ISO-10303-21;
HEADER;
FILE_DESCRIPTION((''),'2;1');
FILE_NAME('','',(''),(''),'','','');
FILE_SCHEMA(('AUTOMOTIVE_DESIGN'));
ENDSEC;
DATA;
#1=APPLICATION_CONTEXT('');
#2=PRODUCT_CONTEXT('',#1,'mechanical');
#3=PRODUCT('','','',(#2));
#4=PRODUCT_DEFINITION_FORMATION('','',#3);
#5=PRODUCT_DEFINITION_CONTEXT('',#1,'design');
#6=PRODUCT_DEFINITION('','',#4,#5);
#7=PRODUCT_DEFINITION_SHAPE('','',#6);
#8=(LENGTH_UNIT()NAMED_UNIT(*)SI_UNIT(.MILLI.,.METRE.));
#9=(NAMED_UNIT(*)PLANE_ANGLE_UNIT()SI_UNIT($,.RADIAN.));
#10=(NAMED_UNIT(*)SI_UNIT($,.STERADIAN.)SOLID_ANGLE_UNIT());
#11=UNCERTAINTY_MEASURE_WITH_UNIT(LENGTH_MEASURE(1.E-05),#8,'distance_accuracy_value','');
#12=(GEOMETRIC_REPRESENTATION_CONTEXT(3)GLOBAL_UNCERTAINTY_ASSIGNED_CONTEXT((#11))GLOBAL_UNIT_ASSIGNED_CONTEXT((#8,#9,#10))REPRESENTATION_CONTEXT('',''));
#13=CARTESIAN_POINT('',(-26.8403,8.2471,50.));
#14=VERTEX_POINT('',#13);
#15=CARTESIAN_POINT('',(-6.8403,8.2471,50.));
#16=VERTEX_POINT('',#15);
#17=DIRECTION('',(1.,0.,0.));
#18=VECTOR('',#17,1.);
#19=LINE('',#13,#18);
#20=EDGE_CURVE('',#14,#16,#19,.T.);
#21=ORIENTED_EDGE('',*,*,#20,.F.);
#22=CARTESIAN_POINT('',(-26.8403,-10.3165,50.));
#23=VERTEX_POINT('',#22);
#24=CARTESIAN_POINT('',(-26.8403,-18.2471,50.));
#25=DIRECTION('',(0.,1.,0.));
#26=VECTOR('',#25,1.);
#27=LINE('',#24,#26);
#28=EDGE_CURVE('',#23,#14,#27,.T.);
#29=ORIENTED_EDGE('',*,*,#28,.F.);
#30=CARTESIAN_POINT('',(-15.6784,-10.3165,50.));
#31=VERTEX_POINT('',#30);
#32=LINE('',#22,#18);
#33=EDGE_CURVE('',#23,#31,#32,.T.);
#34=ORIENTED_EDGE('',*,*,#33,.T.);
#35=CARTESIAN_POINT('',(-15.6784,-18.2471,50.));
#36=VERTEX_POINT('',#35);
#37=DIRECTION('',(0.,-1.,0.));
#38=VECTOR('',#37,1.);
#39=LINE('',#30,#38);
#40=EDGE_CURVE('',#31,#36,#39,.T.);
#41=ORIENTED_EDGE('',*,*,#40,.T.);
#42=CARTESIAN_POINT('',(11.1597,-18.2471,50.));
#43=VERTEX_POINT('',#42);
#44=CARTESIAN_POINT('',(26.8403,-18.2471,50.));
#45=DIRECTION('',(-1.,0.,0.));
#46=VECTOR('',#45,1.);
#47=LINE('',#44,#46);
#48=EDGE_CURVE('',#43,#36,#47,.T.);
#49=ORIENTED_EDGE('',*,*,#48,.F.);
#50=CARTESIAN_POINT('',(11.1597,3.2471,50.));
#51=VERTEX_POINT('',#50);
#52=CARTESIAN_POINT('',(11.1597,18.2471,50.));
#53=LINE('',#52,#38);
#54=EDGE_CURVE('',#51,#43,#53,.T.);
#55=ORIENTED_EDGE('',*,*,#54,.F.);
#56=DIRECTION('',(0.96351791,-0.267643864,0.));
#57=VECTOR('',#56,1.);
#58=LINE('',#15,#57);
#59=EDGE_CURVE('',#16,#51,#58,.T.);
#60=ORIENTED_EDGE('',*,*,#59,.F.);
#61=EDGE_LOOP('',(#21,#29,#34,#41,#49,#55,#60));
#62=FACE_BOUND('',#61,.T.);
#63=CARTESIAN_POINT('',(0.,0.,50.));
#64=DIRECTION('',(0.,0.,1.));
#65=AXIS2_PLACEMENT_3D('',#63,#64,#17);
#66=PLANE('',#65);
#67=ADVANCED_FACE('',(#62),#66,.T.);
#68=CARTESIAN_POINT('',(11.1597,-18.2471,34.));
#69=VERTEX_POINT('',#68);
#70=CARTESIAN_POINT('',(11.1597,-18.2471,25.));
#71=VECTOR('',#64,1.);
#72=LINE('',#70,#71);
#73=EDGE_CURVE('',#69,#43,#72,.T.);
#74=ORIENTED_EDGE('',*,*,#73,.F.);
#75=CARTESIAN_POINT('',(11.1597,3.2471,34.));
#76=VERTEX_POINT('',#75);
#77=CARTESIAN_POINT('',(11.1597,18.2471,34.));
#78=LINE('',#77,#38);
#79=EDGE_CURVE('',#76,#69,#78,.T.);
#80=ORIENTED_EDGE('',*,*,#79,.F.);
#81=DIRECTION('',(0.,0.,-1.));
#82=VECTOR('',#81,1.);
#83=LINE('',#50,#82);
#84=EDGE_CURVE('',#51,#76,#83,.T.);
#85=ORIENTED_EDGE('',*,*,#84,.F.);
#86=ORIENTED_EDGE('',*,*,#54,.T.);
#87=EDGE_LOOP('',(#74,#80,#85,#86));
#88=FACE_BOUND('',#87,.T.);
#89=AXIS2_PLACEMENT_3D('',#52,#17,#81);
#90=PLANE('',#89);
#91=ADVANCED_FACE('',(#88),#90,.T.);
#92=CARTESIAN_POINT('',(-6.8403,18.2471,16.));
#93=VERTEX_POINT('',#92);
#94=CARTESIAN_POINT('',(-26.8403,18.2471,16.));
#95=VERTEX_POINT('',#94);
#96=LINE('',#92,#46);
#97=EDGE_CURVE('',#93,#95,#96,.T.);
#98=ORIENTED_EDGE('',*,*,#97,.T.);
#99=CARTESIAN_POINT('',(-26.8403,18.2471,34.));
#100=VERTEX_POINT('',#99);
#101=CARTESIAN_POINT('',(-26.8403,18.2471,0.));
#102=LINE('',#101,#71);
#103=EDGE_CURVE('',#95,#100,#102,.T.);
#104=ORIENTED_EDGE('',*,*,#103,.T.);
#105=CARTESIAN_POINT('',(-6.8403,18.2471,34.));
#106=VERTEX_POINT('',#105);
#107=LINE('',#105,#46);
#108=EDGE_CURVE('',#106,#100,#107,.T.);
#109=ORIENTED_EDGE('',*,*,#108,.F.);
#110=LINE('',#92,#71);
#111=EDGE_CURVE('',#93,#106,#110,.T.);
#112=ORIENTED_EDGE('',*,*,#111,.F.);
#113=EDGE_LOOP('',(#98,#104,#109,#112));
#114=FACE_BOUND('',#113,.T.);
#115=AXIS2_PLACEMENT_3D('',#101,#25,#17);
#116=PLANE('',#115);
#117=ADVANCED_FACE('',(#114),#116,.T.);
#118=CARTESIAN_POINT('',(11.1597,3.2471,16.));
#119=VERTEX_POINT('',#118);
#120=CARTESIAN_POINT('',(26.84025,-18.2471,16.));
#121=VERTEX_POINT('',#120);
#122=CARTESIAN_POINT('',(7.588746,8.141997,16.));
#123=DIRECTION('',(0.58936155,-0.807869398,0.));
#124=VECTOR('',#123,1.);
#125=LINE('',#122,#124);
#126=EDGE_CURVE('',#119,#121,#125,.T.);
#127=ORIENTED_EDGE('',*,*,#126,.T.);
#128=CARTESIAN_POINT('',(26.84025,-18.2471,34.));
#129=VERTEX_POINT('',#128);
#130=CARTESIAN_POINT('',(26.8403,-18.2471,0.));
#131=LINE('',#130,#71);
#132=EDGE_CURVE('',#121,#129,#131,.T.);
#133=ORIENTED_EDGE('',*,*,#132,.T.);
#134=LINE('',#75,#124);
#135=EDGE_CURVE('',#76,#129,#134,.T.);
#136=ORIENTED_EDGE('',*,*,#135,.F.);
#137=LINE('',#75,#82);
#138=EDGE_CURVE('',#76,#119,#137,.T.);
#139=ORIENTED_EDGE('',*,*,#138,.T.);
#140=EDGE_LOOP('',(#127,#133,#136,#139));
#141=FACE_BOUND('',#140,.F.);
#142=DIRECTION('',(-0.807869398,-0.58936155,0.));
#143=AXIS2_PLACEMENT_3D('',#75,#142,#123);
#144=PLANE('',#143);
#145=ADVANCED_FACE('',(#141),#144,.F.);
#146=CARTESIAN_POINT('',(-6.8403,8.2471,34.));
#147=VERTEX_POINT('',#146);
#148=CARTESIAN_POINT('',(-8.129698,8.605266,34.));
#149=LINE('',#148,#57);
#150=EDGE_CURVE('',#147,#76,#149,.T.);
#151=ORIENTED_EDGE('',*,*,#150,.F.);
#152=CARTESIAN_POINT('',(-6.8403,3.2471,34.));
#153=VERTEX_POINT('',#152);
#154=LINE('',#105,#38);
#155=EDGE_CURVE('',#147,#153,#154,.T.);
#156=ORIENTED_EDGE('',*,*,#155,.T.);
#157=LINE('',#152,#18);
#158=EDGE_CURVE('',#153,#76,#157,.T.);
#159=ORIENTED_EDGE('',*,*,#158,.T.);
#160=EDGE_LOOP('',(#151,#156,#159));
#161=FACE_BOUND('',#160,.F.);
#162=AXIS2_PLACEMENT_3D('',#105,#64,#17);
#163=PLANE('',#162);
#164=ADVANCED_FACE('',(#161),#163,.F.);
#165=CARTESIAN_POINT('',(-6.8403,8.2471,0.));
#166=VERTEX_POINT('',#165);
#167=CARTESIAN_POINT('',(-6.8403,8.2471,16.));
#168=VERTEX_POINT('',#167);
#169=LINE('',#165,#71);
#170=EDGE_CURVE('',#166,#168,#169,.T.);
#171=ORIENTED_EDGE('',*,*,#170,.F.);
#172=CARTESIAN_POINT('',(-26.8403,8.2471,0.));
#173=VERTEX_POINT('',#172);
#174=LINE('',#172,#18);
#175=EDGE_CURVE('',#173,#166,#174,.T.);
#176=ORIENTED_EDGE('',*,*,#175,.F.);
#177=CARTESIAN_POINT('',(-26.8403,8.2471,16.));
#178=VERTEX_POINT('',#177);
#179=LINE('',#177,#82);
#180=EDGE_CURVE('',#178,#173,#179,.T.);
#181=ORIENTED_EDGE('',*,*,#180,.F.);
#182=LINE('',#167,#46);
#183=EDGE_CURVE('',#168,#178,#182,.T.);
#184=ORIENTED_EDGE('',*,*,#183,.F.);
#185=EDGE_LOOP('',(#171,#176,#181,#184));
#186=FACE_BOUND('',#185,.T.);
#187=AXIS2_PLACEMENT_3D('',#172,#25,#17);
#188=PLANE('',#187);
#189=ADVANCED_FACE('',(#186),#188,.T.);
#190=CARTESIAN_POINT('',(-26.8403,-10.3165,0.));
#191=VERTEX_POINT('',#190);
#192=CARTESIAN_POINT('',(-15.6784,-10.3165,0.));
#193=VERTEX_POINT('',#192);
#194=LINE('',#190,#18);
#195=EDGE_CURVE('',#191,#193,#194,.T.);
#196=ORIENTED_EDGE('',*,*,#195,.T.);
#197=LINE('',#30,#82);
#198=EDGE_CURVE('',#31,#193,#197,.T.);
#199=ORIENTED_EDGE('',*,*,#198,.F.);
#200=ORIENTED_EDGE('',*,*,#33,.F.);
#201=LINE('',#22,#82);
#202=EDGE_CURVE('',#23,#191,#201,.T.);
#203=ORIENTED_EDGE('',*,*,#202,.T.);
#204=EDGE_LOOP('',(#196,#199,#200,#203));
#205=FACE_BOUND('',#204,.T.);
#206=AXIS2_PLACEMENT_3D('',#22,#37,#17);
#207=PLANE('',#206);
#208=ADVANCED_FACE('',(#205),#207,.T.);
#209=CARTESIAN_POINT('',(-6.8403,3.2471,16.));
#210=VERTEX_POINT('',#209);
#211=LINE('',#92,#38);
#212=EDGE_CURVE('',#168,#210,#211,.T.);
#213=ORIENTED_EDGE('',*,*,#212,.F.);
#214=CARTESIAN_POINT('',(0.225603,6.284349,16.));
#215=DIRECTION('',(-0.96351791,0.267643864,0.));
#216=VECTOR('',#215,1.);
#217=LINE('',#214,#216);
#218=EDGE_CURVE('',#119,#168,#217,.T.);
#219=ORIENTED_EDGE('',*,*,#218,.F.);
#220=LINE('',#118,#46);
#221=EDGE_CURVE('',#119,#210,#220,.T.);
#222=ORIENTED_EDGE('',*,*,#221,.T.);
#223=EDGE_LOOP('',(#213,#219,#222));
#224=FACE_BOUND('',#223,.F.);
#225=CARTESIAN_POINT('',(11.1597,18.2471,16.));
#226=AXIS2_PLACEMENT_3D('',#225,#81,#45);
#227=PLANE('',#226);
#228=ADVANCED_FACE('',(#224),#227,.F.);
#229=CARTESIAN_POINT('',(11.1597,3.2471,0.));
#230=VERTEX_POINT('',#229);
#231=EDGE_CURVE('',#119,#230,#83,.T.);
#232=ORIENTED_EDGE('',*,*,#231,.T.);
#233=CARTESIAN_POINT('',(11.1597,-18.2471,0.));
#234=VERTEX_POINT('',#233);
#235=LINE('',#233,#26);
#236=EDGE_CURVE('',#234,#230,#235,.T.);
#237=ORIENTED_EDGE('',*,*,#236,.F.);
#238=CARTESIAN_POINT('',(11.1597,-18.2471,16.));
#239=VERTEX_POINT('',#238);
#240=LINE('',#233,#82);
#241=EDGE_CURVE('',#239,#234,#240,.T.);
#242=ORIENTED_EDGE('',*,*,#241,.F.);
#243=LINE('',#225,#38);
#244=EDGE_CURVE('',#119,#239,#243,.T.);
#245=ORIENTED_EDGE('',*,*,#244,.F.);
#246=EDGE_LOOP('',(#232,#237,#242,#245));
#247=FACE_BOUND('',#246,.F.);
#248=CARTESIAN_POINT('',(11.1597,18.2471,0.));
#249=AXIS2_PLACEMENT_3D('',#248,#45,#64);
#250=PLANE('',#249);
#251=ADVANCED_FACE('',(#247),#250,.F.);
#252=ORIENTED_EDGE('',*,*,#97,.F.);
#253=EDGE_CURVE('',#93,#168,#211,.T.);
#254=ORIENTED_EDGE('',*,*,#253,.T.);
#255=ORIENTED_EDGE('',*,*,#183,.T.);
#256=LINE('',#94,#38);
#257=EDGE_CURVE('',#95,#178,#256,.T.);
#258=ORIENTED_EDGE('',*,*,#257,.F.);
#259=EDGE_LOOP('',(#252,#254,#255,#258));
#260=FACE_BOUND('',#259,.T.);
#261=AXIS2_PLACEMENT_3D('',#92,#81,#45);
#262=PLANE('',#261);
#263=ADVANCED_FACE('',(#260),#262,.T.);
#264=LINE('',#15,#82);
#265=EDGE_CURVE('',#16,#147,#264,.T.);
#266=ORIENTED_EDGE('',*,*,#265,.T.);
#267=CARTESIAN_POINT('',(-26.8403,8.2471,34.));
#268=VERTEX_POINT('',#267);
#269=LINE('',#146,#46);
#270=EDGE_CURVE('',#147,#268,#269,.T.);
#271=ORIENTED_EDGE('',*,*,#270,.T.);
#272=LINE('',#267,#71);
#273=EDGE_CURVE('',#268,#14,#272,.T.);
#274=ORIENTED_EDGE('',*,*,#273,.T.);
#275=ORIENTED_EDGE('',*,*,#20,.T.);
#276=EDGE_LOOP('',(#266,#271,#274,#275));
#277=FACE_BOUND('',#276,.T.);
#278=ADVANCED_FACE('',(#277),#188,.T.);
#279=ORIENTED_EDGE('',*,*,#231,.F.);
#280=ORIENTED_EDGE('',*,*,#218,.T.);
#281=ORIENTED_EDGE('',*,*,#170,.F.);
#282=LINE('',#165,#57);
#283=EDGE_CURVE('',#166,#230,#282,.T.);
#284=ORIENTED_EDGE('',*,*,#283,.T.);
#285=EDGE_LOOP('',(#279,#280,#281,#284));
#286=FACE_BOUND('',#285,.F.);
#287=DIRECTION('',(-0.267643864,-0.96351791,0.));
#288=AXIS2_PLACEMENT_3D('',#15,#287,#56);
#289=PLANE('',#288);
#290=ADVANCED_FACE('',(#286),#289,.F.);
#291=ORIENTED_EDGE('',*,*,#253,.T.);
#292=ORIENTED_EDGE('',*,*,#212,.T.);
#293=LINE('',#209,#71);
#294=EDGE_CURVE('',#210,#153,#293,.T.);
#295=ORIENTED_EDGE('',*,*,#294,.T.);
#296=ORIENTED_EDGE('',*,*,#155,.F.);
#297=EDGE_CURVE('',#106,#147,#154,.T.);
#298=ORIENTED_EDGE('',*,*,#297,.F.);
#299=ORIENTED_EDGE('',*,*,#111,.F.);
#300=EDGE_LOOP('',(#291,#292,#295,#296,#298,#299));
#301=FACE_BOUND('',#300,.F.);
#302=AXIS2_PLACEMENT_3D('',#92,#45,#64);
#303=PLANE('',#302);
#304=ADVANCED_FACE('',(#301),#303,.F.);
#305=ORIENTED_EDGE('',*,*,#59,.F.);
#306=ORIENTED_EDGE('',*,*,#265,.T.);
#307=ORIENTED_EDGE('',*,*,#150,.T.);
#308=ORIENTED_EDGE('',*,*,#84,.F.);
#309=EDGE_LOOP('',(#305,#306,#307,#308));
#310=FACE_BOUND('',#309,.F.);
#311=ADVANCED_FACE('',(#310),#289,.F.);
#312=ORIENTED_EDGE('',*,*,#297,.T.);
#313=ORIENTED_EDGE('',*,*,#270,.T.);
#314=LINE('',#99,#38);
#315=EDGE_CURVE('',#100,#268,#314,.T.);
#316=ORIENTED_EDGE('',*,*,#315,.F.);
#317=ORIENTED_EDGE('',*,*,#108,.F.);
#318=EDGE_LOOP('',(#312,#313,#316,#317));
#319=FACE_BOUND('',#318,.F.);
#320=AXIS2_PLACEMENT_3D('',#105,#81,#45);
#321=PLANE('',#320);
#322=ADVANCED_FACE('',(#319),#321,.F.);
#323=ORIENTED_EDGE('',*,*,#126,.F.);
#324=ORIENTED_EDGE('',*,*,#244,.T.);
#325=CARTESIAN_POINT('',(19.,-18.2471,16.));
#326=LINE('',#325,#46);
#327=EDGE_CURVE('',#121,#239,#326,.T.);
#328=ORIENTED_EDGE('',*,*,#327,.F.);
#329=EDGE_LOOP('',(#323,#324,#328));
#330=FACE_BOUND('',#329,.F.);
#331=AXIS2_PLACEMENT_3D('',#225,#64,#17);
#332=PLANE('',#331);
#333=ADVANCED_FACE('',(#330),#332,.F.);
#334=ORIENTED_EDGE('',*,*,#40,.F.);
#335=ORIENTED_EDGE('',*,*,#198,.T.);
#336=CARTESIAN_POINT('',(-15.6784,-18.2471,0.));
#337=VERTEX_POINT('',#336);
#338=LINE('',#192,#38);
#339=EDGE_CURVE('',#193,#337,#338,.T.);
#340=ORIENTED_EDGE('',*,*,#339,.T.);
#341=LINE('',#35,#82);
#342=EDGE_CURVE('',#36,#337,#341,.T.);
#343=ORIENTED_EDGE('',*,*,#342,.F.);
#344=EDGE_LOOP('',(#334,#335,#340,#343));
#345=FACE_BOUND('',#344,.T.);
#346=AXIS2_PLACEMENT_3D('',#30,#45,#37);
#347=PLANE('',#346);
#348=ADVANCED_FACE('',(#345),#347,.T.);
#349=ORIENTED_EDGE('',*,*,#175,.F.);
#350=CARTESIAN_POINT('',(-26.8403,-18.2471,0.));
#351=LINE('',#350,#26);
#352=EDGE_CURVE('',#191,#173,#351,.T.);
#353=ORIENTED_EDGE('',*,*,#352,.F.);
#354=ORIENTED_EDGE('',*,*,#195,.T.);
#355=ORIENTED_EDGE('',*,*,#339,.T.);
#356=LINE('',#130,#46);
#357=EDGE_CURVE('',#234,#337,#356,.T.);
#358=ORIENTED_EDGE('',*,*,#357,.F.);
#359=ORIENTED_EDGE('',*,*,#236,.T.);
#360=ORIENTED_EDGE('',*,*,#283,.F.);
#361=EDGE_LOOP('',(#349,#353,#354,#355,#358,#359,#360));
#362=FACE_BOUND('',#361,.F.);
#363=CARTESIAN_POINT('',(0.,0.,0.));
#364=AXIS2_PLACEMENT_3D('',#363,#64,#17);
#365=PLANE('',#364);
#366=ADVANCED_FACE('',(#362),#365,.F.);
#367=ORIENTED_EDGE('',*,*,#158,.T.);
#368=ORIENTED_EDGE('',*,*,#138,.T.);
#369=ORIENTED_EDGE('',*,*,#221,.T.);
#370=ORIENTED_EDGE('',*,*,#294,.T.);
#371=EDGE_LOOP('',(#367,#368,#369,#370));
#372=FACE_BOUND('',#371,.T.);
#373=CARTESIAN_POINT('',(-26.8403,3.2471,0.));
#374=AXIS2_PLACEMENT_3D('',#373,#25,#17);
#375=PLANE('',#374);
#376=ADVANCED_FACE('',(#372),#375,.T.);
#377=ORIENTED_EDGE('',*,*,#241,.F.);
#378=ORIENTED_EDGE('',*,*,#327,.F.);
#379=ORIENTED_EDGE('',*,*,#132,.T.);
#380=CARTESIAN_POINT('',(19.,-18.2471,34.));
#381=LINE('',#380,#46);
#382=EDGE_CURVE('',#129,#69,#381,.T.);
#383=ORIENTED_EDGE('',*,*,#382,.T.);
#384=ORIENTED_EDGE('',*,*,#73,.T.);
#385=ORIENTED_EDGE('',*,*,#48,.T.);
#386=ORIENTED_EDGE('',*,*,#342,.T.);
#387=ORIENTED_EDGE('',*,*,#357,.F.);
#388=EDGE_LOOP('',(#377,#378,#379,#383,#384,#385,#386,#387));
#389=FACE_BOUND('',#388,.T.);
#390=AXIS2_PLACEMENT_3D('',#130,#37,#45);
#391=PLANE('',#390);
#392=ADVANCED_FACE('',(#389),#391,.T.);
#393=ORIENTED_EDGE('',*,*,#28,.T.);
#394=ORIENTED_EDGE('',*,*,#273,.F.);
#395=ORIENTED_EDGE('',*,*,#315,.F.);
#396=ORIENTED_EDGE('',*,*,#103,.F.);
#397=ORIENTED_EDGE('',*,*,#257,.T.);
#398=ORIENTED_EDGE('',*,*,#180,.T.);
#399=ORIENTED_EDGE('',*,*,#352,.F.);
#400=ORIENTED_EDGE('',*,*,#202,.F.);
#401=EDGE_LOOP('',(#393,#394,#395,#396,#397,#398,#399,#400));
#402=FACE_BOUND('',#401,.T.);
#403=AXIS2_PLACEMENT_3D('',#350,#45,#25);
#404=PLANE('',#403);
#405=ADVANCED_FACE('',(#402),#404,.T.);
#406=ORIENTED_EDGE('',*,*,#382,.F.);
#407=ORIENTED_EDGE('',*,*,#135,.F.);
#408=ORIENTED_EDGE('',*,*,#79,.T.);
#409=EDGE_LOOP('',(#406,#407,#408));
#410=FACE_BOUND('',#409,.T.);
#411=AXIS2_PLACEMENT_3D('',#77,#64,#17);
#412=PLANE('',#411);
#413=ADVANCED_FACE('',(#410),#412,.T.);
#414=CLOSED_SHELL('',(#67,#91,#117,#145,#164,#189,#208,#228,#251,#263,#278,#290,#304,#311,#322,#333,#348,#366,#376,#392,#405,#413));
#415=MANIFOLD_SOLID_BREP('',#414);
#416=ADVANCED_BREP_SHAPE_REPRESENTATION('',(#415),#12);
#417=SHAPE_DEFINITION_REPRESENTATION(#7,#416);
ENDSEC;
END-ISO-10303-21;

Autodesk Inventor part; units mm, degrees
ref_plane "YZ Plane" through (0, 0, 0) normal (1, 0, 0) x (0, 1, 0)
ref_plane "XZ Plane" through (0, 0, 0) normal (0, 1, 0) x (-1, 0, 0)
ref_plane "XY Plane" through (0, 0, 0) normal (0, 0, 1) x (1, 0, 0)
sketch "스케치1" plane through (0, 0, 0) normal (0, 0, 1) x (1, 0, 0)
  line L0 (26.8403, -18.2471) -> (-26.8403, -18.2471)
  line L1 (-26.8403, -18.2471) -> (-26.8403, 18.2471)
  line L2 (-26.8403, 18.2471) -> (26.8403, 18.2471)
  line L3 (26.8403, 18.2471) -> (26.8403, -18.2471)
  line L4 (26.8403, -18.2471) -> (-26.8403, 18.2471) construction
  line L5 (-26.8403, -18.2471) -> (26.8403, 18.2471) construction
  point P0 (0, 0)
extrude "돌출1" add sketch "스케치1" along normal blind 50
sketch "스케치2" plane through (-26.8403, 18.2471, 0) normal (0, 1, 0) x (1, 0, 0)
  line L0 (0, -50) -> (53.6805, -50) projected
  line L1 (0, -50) -> (20, -50)
  line L2 (20, -50) -> (20, -34)
  line L3 (20, -34) -> (0, -34)
  line L4 (0, -34) -> (0, -50)
  line L5 (0, 0) -> (20, 0)
  line L6 (20, 0) -> (20, -16)
  line L7 (20, -16) -> (0, -16)
  line L8 (0, -16) -> (0, 0)
  line L9 (20, -34) -> (38, -34)
  line L10 (38, -34) -> (38, -16)
  line L11 (38, -16) -> (20, -16)
  line L12 (20, -16) -> (20, -34)
  line L13 (38, -34) -> (53.6805, -34)
  line L14 (53.6805, -34) -> (53.6805, -50)
  line L15 (53.6805, -50) -> (38, -50)
  line L16 (38, -50) -> (38, -34)
  line L17 (53.6805, 0) -> (53.6805, -50) projected
  line L18 (38, -16) -> (53.6805, -16)
  line L19 (53.6805, -16) -> (53.6805, 0)
  line L20 (53.6805, 0) -> (38, 0)
  line L21 (38, 0) -> (38, -16)
  point P0 (26.8403, 0)
  dimension "d2" = 20
  dimension "d3" = 16
  dimension "d4" = 20
  dimension "d5" = 16
  dimension "d6" = 18
extrude "돌출2" cut sketch "스케치2" against normal blind 10 contours L4 L3 L2 L0 | L7 L8 L5 L6
extrude "돌출3" cut sketch "스케치2" against normal blind 15 contours L12 L11 L10 L9
extrude "돌출4" cut sketch "스케치2" against normal blind 50 contours L16 L13 L14 L0 | L21 L20 L17 L18
sketch "스케치3" plane through (11.1597, 18.2471, 34) normal (0, 0, 1) x (1, 0, 0)
  line L0 (15.6805, -36.4941) -> (15.6805, 0) projected
  line L1 (0, -15) -> (15.6805, -36.4941)
  line L2 (15.6805, -36.4941) -> (15.6805, 0)
  line L3 (0, -36.4941) -> (0, 0) projected
  line L4 (15.6805, 0) -> (0, 0)
  line L5 (0, 0) -> (0, -15)
  point P0 (-11.1597, -18.2471)
extrude "돌출5" cut sketch "스케치3" against normal blind 50
sketch "스케치4" plane through (0, 0, 50) normal (0, 0, 1) x (1, 0, 0)
  line L0 (-6.8403, 8.2471) -> (-6.8403, 18.2471) projected
  line L1 (-6.8403, 3.2471) -> (11.1597, 3.2471) projected
  line L2 (-6.8403, 8.2471) -> (11.1597, 3.2471)
  line L3 (11.1597, 18.2471) -> (-6.8403, 18.2471) projected
  line L4 (11.1597, 3.2471) -> (11.1597, 18.2471)
  line L5 (11.1597, 18.2471) -> (-6.8403, 18.2471)
  line L6 (-6.8403, 18.2471) -> (-6.8403, 8.2471)
  point P0 (0, 0)
extrude "돌출6" cut sketch "스케치4" against normal blind 50
sketch "스케치5" plane through (0, 0, 50) normal (0, 0, 1) x (1, 0, 0)
  line L0 (-26.8403, 8.2471) -> (-26.8403, -18.2471) projected
  line L1 (-26.8403, -18.2471) -> (11.1597, -18.2471) projected
  line L2 (-26.8403, -10.3165) -> (-15.6784, -10.3165)
  line L3 (-15.6784, -10.3165) -> (-15.6784, -18.2471)
  line L4 (-15.6784, -18.2471) -> (-26.8403, -18.2471)
  line L5 (-26.8403, -18.2471) -> (-26.8403, -10.3165)
  point P0 (0, 0)
extrude "돌출7" cut sketch "스케치5" against normal blind 50
properties part number "240628_final1"
